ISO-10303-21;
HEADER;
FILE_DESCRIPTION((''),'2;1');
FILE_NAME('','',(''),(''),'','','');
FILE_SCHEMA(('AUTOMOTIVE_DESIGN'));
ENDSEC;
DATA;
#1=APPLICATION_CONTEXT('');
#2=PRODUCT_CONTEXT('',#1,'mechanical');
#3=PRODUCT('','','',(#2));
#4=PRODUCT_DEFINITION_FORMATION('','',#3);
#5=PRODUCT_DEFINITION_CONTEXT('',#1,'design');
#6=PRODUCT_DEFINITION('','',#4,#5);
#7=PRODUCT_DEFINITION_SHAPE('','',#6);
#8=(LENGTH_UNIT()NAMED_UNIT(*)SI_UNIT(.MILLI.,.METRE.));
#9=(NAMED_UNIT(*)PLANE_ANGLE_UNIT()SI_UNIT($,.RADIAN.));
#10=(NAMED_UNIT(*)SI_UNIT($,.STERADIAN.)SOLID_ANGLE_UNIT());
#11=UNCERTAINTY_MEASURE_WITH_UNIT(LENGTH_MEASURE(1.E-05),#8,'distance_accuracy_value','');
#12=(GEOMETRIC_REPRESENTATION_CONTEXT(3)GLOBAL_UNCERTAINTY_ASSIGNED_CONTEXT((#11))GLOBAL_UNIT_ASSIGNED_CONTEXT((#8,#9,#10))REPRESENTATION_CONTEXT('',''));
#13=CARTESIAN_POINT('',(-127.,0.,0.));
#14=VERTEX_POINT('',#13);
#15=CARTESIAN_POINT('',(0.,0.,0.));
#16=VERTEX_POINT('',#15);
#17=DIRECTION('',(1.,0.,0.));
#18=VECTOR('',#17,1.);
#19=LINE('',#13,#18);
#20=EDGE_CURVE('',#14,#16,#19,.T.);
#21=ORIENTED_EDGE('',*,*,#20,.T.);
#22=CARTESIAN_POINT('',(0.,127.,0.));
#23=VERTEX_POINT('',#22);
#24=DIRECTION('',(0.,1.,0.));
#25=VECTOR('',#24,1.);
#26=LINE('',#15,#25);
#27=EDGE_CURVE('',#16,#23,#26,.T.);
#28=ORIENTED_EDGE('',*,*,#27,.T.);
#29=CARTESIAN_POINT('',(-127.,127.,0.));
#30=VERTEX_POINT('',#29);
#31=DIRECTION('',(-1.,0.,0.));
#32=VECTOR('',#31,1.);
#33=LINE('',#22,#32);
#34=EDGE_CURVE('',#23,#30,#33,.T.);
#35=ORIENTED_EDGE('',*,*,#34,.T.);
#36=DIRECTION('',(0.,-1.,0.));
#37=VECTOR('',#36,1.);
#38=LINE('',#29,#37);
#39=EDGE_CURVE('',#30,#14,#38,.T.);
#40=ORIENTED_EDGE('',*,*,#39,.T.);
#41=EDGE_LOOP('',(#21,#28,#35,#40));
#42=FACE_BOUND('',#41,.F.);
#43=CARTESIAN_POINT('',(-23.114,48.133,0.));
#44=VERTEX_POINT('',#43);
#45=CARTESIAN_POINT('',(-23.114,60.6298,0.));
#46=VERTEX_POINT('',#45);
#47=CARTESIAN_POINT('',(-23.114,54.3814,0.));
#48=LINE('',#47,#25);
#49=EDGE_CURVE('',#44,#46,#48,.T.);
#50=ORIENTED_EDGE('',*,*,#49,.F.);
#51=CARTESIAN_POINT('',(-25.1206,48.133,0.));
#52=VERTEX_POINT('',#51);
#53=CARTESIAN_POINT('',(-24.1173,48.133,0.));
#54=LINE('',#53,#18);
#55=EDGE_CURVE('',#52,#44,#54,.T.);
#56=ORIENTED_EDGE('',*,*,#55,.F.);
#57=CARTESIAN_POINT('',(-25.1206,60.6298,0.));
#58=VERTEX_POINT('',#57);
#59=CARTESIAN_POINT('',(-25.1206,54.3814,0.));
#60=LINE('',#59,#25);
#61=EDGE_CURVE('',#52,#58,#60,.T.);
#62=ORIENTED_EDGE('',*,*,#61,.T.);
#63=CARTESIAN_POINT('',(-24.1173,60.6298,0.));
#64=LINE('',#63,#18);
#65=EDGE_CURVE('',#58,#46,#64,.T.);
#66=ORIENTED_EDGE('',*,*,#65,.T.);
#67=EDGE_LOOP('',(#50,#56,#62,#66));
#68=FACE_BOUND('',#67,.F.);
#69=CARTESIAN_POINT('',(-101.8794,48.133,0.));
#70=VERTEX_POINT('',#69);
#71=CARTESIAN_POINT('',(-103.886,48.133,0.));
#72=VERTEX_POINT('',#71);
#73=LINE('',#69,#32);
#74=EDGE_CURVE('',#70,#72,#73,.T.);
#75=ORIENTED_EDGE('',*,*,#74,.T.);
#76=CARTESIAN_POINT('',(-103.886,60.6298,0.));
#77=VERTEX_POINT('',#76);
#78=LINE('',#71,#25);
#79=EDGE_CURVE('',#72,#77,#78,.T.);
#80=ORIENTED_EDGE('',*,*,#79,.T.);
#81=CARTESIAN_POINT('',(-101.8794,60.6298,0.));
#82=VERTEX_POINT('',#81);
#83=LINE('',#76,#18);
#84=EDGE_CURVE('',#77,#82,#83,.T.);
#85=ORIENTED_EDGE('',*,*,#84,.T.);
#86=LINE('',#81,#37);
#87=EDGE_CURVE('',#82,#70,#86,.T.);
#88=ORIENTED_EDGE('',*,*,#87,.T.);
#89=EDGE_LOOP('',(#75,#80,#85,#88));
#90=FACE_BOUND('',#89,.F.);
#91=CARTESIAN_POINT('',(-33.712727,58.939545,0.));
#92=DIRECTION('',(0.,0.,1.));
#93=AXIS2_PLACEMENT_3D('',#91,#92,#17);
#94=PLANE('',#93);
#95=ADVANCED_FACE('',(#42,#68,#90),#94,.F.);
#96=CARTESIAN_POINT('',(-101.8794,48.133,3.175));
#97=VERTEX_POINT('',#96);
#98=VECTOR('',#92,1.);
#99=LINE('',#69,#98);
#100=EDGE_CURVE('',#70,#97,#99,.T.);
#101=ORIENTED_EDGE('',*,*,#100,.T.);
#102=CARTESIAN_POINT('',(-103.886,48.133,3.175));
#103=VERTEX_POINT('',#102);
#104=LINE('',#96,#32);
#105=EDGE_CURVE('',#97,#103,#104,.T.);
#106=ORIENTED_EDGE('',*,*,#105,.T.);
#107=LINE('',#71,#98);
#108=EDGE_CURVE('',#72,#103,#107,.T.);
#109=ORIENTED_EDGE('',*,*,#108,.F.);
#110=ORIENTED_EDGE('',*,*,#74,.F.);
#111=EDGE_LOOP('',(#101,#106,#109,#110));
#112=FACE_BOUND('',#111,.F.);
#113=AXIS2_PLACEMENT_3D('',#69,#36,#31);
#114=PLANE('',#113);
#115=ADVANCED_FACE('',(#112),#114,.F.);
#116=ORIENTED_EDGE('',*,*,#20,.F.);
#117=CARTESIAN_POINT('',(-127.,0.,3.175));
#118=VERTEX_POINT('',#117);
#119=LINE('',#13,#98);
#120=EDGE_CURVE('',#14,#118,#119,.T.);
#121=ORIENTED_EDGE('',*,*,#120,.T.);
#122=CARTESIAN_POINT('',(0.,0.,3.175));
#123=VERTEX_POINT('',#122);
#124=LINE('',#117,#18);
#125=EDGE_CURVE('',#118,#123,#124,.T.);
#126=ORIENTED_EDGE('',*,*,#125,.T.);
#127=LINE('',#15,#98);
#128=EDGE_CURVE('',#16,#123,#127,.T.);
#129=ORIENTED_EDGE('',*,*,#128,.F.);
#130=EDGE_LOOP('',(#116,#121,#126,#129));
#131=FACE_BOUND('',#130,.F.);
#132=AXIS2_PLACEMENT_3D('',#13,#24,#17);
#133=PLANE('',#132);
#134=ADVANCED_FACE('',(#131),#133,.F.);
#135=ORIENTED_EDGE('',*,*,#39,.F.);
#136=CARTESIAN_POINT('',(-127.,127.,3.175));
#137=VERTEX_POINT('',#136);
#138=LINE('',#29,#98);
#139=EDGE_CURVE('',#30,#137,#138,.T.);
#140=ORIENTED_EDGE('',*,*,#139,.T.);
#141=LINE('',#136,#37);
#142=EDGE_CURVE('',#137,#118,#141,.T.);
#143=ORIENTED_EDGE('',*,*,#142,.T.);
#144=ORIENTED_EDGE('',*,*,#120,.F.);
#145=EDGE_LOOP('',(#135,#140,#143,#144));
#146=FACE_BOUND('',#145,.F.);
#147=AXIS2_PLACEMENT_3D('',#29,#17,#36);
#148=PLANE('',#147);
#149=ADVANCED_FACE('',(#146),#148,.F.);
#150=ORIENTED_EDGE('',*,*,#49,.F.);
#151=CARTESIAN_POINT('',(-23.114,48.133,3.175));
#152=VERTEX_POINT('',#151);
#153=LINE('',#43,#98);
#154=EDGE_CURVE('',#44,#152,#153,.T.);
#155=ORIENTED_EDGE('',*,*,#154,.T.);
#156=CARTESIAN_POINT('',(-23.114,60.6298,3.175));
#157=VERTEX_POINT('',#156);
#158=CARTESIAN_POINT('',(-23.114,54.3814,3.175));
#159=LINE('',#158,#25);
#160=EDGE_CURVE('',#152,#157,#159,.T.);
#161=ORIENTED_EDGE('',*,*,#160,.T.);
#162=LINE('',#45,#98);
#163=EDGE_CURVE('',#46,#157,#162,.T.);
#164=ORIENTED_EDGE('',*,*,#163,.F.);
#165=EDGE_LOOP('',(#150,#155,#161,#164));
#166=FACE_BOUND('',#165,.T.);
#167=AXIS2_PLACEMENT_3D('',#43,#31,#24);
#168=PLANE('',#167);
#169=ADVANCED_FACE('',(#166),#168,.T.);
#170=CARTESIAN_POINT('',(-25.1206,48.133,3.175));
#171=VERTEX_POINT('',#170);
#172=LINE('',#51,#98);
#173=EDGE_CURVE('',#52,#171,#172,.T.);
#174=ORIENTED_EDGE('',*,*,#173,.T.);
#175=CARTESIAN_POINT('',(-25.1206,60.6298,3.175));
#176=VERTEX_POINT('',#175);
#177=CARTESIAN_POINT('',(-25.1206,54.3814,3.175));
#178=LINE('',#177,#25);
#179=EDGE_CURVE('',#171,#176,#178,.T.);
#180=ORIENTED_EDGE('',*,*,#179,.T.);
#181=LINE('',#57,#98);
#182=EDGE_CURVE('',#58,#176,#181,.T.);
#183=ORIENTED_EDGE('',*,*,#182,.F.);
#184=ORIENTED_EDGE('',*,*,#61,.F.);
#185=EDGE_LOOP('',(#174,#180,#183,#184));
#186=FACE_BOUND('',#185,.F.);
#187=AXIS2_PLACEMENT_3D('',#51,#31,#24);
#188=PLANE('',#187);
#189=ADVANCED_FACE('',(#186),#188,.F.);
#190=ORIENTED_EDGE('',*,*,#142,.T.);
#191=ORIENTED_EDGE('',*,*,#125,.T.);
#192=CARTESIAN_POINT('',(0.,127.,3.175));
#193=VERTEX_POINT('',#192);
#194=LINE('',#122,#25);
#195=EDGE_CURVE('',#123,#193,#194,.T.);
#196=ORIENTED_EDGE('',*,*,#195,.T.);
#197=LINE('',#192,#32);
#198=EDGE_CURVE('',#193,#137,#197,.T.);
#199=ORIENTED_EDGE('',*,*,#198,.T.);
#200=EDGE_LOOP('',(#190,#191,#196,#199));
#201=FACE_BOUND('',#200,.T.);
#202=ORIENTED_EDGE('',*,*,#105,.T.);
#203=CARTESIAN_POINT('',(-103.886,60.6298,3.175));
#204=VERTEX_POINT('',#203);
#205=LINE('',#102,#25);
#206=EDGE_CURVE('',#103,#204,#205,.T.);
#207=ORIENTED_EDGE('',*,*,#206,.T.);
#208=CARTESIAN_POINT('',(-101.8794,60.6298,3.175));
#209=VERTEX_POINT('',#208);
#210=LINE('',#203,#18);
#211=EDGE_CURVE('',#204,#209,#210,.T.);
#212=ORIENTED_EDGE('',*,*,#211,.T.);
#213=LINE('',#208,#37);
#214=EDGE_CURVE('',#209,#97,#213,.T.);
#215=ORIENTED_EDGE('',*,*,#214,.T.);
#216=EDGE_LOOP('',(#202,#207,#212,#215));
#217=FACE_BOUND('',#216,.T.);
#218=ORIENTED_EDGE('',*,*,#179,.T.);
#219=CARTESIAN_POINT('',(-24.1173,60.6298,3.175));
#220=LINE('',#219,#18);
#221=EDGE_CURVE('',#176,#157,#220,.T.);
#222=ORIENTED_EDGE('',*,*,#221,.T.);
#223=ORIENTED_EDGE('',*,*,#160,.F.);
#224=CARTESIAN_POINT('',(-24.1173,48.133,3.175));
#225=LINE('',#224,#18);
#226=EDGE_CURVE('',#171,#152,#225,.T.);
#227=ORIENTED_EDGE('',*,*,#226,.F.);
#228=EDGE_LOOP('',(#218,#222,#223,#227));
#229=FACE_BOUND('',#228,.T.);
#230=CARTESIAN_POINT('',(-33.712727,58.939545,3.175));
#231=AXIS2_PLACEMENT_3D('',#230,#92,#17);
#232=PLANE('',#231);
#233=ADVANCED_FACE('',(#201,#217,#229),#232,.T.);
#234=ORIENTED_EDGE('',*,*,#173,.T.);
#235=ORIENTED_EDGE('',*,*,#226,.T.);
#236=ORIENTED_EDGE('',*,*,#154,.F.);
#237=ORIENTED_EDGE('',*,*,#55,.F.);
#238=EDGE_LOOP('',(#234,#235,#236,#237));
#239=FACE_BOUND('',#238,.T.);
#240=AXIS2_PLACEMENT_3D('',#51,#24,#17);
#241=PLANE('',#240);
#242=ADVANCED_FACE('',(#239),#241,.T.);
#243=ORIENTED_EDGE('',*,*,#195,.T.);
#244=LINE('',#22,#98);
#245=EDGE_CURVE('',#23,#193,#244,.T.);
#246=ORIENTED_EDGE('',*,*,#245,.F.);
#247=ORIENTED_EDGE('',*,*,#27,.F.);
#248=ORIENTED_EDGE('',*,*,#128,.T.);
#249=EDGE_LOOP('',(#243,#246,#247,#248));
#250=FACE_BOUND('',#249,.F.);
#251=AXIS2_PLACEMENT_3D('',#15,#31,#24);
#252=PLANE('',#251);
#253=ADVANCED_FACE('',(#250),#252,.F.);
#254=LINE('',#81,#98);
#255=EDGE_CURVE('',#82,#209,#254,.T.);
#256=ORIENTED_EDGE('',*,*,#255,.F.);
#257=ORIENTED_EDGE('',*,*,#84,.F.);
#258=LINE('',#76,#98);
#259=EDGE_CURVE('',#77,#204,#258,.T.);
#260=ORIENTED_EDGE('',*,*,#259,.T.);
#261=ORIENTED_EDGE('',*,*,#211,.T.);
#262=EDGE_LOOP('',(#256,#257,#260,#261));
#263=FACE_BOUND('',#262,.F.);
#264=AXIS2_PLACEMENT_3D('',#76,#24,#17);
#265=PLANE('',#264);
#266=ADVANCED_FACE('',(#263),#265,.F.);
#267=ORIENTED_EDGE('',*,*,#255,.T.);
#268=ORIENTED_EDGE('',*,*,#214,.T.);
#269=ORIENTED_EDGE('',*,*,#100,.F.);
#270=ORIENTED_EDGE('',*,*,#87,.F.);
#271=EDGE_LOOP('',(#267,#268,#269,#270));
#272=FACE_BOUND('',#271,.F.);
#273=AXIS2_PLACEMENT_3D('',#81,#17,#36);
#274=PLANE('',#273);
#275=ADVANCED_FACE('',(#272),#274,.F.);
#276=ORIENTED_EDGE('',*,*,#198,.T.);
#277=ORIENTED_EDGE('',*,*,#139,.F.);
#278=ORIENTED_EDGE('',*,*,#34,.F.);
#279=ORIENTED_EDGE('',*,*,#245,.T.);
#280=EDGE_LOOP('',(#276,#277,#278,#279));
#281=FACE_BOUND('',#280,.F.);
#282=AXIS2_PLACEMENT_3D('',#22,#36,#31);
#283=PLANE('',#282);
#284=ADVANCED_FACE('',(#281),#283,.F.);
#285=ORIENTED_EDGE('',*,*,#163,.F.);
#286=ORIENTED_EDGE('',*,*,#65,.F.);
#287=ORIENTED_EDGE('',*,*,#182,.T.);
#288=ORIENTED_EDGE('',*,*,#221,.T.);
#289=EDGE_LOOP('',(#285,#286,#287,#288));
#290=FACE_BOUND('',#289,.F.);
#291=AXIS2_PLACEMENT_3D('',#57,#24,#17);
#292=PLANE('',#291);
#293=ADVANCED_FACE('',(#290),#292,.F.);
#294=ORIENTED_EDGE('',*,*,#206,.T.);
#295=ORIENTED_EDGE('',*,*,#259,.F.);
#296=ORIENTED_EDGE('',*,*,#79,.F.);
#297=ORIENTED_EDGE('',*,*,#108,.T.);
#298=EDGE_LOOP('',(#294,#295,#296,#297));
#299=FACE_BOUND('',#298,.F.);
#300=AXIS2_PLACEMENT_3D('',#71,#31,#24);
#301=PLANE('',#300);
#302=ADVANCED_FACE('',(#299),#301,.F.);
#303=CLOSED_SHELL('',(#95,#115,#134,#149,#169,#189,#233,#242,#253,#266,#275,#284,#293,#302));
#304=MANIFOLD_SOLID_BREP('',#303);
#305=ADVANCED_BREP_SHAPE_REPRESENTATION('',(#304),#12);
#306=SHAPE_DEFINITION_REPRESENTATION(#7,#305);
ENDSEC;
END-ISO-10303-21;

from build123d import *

# Parameters (mm, degrees)
F0_W     = 2.0066
F0_H     = 12.4968
F0_W_2   = 19.05
F0_H_2   = 12.7
F0_H_3   = 1.27
F1_DEPTH = 3.175


# Not quite as in the source:
# - a length typed as a fraction of an inch, garbled in the dataset ("3 / 203.2 mm" for 3/8 in), is restored


with BuildPart() as f1:
    # F0 (on Top) → F1 (new body)
    with BuildSketch(Plane.XY):
        Polygon((-63.5, 0), (0, 0), (0, 127), (-63.5, 127), (-63.5, 13.97), (-44.45, 13.97), (-44.45, 12.7), (-63.5, 12.7), align=None)
        with Locations((-24.1173, 54.3814)):
            Rectangle(F0_W, F0_H, mode=Mode.SUBTRACT)
        Polygon((-95.25, 0), (-82.55, 0), (-82.55, 12.7), (-82.55, 13.97), (-63.5, 13.97), (-63.5, 127), (-127, 127), (-127, 54.3814), (-127, 0), align=None)
        Polygon((-103.886, 48.133), (-103.886, 54.3814), (-103.886, 60.6298), (-101.8794, 60.6298), (-101.8794, 48.133), align=None, mode=Mode.SUBTRACT)
        with Locations((-73.025, 6.35)):
            Rectangle(F0_W_2, F0_H_2)
        with Locations((-73.025, 13.335)):
            Rectangle(F0_W_2, F0_H_3)
        with Locations((-53.975, 13.335)):
            Rectangle(F0_W_2, F0_H_3)
    extrude(amount=F1_DEPTH)


solid = f1.part
